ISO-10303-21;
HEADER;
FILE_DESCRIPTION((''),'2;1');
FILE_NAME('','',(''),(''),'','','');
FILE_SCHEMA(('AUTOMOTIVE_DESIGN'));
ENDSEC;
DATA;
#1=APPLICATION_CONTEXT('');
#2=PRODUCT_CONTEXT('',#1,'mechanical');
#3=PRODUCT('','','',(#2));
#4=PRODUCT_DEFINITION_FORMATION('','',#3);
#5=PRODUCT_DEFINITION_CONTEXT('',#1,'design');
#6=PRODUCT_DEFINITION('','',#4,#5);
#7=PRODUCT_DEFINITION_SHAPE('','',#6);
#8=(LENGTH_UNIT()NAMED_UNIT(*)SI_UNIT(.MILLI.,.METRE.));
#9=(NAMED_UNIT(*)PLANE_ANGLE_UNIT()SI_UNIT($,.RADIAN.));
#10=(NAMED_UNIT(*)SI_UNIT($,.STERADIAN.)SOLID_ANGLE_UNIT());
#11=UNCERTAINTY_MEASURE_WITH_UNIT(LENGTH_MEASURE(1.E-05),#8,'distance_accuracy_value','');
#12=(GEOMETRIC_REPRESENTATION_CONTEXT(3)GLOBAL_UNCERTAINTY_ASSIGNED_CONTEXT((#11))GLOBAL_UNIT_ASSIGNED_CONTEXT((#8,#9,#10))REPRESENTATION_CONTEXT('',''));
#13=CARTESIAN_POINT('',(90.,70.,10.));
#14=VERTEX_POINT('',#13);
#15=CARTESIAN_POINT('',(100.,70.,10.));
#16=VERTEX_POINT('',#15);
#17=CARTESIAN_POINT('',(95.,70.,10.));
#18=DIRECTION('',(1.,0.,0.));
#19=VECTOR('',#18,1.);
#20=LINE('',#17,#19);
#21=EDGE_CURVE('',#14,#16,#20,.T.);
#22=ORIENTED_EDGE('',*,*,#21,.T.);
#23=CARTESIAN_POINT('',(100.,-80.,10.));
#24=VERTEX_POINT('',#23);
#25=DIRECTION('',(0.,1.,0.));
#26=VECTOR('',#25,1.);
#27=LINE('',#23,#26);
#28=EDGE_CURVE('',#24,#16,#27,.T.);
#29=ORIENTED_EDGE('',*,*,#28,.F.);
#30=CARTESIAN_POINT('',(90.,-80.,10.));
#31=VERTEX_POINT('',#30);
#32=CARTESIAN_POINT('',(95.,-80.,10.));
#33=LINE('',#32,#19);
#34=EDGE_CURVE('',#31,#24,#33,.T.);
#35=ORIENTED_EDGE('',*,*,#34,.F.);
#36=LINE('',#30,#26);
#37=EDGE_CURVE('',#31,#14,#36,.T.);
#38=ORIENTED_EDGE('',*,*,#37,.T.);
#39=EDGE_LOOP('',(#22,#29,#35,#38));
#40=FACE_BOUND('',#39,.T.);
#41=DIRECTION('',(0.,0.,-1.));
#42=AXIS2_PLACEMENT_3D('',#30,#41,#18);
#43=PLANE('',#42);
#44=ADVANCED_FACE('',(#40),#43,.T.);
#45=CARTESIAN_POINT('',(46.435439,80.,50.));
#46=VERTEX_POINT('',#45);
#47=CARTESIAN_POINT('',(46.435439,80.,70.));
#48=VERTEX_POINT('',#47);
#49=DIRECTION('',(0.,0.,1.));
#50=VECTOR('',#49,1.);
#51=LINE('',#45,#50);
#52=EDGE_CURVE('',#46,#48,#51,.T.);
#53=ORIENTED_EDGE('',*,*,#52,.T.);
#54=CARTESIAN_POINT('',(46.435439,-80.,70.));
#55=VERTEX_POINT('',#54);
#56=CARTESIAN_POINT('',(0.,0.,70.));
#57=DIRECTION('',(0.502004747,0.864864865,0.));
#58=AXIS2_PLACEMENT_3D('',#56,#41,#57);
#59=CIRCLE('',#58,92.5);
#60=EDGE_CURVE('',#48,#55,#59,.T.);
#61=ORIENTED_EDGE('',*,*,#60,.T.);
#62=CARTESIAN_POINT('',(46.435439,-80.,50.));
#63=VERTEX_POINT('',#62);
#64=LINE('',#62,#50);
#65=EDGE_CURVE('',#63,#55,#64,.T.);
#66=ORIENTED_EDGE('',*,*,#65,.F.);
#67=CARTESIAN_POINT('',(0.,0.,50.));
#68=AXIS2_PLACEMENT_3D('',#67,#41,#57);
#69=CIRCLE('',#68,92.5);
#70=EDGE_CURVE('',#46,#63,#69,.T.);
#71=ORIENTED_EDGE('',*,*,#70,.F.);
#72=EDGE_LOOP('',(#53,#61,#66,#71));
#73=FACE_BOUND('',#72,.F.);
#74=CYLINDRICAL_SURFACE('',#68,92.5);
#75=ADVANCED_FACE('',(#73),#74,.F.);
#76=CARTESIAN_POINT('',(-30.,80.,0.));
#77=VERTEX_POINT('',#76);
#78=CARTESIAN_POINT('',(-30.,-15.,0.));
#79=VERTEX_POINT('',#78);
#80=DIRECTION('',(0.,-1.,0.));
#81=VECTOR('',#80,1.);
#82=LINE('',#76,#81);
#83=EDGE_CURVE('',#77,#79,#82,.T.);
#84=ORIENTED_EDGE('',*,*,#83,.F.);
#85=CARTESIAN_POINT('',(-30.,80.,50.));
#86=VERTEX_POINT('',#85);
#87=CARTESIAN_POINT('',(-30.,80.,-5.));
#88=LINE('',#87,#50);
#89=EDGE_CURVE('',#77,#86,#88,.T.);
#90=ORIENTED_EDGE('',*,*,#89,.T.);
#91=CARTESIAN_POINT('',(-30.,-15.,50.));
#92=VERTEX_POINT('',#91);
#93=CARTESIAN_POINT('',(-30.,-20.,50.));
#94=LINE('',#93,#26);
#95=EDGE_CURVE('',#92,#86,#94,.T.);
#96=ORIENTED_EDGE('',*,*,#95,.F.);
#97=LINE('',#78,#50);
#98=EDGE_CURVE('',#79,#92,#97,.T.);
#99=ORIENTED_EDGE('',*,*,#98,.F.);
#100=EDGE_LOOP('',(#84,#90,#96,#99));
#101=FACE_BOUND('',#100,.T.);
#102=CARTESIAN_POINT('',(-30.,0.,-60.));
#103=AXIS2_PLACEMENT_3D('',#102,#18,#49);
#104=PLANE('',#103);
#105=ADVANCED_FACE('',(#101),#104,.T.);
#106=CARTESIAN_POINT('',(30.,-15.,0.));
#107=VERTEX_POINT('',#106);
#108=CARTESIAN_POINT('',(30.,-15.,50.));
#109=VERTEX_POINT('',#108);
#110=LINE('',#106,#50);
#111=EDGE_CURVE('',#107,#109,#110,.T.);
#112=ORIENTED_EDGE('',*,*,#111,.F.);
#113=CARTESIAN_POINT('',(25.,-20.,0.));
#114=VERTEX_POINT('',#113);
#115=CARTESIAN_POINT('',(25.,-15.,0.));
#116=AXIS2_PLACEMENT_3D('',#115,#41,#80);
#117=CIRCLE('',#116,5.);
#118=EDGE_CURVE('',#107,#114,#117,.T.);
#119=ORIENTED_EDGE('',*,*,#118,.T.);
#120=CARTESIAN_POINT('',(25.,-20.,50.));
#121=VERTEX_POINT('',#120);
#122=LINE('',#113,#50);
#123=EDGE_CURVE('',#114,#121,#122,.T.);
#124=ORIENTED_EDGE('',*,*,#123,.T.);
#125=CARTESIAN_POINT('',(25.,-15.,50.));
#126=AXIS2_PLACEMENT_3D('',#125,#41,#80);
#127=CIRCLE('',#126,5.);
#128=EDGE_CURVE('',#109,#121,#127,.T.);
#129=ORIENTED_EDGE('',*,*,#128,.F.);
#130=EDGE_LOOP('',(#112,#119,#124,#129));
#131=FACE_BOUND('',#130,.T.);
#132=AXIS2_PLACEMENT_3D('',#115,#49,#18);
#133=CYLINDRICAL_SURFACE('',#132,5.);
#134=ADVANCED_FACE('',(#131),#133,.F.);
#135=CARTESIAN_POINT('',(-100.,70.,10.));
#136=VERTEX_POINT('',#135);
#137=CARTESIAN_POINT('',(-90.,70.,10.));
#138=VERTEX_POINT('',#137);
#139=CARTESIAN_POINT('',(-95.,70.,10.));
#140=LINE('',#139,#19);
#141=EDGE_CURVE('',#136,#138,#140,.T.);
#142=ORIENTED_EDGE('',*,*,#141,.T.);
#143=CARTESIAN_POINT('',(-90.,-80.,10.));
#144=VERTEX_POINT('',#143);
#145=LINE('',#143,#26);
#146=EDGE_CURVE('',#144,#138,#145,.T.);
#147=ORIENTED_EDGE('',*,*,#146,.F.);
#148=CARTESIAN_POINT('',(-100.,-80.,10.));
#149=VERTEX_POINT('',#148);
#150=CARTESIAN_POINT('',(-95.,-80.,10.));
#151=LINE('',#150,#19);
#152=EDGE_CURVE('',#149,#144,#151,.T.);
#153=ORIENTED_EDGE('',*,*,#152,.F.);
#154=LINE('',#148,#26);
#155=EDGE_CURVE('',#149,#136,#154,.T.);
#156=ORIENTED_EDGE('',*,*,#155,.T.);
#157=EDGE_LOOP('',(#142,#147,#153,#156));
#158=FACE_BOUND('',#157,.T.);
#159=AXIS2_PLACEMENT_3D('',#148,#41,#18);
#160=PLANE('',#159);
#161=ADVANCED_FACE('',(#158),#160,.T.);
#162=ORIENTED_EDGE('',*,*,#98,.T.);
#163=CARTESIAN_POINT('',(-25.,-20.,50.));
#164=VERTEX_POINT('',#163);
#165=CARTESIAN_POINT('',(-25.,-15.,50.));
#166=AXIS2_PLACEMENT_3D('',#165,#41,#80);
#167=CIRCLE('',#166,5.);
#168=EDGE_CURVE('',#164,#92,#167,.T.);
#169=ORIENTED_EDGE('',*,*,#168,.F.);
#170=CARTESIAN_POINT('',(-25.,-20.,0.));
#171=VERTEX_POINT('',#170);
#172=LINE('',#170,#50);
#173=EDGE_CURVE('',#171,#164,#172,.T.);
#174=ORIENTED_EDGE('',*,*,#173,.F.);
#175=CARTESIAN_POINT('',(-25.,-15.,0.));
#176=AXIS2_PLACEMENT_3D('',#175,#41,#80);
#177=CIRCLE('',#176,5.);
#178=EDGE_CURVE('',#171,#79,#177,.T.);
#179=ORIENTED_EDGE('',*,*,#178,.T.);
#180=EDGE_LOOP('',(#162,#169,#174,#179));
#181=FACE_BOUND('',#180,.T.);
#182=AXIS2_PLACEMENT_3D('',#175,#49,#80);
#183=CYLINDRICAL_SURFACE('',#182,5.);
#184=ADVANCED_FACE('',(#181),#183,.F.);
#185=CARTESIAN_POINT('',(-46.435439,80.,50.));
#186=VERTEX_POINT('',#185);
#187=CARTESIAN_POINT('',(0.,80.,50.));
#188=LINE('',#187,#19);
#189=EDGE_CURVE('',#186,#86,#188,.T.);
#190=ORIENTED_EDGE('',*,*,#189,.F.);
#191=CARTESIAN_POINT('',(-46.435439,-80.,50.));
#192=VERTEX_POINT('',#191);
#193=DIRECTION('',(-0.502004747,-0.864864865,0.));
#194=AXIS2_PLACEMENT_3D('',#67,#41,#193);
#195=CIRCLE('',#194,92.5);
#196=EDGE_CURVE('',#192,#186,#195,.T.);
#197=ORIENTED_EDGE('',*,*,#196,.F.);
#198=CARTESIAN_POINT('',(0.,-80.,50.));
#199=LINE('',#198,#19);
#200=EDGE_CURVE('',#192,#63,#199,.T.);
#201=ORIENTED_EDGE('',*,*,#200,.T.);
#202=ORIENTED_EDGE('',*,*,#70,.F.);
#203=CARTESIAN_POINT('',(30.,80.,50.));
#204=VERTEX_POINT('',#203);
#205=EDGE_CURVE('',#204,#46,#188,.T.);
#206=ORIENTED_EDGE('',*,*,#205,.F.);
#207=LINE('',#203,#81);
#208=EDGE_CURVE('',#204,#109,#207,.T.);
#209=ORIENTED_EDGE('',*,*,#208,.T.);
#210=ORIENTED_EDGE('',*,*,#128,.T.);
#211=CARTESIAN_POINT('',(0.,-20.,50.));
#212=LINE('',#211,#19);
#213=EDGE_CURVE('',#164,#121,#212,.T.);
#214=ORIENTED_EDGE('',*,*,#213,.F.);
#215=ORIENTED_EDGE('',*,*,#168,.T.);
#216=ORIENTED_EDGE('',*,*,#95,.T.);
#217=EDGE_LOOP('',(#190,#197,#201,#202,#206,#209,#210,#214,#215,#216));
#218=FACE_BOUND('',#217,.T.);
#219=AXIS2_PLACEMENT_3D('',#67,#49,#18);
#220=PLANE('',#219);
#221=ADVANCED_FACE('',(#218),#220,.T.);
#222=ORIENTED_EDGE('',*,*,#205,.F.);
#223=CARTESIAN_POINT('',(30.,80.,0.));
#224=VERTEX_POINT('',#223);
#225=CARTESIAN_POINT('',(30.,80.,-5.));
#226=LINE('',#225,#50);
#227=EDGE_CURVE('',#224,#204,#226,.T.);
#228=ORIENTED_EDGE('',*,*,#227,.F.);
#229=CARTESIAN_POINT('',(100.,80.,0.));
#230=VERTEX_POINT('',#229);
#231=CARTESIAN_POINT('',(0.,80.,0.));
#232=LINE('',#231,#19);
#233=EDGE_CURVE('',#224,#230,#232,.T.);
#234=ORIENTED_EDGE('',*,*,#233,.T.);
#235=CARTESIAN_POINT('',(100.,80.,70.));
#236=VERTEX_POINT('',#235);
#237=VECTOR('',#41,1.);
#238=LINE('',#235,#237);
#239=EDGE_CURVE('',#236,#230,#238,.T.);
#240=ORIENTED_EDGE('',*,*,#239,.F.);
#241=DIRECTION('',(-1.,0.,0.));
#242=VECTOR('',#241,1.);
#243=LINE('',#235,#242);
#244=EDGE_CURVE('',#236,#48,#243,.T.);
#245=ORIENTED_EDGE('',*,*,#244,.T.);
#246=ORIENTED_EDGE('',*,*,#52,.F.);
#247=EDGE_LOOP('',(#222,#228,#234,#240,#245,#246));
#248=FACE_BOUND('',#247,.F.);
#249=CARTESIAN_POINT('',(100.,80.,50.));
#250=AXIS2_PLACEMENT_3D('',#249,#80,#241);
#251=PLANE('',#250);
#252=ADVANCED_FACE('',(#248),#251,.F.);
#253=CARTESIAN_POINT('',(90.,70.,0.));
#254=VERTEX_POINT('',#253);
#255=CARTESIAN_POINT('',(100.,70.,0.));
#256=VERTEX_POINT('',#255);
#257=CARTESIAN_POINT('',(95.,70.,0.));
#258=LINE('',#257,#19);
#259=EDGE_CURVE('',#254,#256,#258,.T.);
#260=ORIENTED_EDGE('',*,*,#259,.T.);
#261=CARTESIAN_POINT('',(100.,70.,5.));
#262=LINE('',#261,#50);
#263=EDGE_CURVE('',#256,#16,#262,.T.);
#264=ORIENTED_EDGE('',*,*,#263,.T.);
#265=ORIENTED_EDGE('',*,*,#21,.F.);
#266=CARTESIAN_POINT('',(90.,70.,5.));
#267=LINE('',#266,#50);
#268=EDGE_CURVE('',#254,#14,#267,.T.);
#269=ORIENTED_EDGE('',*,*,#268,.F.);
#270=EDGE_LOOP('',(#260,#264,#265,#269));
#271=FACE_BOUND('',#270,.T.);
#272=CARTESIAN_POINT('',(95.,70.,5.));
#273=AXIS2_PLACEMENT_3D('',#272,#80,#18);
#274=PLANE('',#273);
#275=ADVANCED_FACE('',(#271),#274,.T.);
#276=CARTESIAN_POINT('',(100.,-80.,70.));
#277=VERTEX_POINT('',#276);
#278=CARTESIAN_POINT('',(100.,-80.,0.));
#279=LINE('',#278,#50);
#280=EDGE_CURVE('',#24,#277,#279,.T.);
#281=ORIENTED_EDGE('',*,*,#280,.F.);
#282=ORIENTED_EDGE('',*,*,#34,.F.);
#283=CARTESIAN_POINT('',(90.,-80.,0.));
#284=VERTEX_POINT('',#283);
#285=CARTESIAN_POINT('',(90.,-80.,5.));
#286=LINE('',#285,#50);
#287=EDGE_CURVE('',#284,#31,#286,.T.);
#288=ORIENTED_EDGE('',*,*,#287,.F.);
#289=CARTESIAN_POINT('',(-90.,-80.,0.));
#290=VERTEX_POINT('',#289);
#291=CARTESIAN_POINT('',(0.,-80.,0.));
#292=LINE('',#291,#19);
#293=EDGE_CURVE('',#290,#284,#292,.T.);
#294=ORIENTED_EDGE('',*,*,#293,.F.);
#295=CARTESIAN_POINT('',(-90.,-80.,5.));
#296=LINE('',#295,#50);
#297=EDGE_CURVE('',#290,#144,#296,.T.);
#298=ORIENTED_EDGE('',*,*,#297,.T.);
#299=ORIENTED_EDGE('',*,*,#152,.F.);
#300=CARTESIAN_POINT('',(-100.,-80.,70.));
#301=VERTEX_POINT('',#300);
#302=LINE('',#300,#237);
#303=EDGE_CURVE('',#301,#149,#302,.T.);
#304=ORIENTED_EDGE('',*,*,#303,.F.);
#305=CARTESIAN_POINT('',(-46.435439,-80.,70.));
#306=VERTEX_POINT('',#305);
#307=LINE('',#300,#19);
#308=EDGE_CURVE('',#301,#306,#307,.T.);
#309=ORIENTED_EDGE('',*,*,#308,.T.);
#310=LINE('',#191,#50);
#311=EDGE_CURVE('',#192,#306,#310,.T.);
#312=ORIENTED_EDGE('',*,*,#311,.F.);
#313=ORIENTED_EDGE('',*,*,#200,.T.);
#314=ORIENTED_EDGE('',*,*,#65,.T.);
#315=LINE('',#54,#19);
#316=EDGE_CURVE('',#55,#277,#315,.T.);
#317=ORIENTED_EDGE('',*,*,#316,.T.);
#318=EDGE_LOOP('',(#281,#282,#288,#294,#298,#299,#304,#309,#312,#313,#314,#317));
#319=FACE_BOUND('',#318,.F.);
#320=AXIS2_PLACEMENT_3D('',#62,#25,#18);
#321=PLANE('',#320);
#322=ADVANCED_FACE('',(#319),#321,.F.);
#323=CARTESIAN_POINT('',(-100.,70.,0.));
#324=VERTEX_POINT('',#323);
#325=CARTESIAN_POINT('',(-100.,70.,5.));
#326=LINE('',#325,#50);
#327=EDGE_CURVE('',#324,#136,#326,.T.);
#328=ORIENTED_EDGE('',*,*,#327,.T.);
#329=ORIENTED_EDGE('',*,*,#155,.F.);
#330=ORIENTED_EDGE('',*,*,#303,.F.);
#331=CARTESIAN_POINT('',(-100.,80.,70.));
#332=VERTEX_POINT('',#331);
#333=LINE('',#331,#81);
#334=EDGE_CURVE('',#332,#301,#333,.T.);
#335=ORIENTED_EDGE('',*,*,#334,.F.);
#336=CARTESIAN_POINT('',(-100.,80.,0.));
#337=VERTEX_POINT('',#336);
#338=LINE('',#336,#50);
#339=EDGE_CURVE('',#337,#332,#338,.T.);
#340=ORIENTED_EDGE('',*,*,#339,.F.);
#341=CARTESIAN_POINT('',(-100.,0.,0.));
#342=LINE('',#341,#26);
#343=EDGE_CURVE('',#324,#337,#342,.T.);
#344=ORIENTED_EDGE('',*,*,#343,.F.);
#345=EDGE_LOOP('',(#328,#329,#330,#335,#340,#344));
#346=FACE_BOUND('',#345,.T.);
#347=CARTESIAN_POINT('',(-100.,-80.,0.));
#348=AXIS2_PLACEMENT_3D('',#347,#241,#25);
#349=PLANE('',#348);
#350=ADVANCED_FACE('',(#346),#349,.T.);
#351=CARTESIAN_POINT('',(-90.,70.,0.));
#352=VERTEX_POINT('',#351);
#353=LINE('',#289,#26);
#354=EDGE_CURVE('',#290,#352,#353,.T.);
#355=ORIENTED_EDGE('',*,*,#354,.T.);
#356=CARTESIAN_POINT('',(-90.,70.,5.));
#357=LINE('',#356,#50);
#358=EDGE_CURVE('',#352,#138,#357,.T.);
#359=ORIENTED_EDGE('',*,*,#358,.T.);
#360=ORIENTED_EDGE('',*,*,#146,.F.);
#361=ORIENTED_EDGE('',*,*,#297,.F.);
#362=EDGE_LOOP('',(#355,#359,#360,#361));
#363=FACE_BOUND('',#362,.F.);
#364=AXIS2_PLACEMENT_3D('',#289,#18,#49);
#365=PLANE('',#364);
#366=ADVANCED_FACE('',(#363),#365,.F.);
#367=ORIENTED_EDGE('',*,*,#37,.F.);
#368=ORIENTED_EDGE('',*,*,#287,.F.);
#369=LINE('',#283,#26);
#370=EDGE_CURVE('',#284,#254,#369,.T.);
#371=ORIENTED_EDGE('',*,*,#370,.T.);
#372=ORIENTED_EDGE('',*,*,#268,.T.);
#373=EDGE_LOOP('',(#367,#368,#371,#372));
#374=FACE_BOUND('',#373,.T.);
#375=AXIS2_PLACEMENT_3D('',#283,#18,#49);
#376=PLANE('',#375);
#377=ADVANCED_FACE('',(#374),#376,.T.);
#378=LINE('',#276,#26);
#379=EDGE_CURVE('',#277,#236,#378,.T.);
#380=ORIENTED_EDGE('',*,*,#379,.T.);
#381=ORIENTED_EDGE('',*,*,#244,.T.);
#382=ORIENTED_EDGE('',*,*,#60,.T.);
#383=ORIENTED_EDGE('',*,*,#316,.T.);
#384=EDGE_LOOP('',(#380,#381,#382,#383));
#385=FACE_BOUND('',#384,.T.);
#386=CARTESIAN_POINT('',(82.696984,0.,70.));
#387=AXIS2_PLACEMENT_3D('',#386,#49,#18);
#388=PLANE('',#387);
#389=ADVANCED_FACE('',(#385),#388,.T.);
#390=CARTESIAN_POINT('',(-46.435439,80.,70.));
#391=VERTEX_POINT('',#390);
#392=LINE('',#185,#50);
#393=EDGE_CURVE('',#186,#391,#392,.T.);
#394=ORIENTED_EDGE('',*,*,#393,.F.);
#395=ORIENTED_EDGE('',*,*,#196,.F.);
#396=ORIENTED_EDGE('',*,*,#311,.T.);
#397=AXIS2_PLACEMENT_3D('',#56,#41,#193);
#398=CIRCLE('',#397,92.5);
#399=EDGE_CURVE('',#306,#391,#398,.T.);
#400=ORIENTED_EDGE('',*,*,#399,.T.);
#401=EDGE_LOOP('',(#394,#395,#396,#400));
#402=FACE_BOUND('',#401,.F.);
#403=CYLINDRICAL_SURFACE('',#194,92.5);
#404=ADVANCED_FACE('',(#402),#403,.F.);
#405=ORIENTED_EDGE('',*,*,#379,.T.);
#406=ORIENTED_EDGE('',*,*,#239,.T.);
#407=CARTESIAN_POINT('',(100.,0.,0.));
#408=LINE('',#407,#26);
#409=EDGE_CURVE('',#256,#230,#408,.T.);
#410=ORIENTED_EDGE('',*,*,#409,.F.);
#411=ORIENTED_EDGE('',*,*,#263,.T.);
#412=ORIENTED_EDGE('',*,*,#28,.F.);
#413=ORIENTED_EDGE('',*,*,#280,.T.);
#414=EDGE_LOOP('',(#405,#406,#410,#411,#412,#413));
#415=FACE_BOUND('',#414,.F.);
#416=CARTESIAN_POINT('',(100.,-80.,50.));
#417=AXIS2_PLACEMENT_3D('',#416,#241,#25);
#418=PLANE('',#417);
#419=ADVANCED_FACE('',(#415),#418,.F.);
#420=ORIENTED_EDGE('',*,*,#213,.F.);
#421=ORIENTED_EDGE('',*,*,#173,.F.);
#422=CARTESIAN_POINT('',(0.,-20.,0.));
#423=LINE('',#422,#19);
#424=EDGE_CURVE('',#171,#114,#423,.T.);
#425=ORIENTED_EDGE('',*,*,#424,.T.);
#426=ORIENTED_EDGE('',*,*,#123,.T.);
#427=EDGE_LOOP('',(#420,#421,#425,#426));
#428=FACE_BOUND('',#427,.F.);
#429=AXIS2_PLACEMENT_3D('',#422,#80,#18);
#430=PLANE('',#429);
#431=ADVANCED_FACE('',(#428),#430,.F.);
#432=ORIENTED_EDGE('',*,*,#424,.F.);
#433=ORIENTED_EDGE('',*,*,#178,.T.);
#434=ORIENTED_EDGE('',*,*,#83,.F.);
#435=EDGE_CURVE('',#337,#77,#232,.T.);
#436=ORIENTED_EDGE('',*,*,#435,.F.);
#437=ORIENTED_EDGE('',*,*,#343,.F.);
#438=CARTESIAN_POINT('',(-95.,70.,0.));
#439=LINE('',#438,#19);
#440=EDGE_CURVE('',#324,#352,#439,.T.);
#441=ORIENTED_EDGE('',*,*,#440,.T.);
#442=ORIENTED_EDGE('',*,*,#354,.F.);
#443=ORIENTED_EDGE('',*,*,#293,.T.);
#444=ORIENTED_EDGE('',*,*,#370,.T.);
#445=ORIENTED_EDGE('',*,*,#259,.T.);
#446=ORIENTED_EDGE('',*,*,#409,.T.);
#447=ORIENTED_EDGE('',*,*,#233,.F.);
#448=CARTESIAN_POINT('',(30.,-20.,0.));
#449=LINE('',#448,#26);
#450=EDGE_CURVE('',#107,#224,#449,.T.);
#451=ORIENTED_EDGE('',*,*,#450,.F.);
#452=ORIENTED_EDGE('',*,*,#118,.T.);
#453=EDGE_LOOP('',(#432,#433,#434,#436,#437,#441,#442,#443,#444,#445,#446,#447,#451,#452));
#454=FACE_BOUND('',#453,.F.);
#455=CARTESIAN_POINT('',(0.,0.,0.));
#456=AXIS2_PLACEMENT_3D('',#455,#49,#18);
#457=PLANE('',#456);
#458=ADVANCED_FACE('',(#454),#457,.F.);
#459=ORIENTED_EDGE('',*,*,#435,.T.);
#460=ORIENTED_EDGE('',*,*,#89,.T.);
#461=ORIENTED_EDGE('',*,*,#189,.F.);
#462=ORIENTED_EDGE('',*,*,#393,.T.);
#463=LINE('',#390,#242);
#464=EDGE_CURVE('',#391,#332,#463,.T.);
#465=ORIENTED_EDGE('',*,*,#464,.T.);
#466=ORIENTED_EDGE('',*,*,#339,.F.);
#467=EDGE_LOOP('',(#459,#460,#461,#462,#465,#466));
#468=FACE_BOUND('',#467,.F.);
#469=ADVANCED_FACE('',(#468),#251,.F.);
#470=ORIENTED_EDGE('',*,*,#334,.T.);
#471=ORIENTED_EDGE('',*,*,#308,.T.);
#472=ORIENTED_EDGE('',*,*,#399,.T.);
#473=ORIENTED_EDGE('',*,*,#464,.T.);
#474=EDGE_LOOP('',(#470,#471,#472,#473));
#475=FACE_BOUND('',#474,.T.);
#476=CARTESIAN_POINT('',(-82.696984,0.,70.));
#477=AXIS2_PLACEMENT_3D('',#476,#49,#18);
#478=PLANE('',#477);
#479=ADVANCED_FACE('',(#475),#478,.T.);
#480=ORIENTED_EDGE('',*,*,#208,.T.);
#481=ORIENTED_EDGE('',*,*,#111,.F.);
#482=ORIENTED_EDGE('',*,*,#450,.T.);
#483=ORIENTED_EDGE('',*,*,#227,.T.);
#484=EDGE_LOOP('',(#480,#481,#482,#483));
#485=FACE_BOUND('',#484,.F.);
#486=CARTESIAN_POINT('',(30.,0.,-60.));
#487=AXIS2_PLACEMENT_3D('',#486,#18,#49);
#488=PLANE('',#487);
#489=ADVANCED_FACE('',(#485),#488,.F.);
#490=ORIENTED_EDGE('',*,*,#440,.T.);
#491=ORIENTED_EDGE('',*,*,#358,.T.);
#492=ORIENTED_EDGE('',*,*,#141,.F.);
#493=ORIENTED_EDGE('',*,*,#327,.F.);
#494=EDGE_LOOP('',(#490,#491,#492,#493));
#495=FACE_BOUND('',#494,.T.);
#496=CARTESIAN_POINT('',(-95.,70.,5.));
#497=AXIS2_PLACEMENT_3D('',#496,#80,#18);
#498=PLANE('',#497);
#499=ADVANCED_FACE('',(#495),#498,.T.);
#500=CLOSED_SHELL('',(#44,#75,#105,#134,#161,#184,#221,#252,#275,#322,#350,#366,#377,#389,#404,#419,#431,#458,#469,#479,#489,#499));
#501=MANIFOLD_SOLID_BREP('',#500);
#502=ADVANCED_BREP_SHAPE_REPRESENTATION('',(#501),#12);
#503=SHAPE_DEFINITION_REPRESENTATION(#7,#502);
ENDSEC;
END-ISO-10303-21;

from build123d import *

# Parameters (mm, degrees)
F0_W          = 200
F0_H          = 160
F1_DEPTH      = 50
F3_DEPTH      = 20
F5_W          = 60
F5_H          = 120
F6_DEPTH      = 90
F6_DEPTH_BACK = 20
F9_W          = 10
F9_H          = 10
F10_DEPTH     = 150
F11_R         = 5


with BuildPart() as f1:
    # F0 (on Top) → F1 (new body)
    with BuildSketch(Plane.XY):
        Rectangle(F0_W, F0_H)
    extrude(amount=F1_DEPTH)

    # F2 (on face) → F3 (join)
    with BuildSketch(Plane.XY.offset(50)):
        with BuildLine():
            ThreePointArc((46.4354390525, 80), (80.1608636192, 46.1571873474), (92.5, 0))
            ThreePointArc((92.5, 0), (80.1608636192, -46.1571873474), (46.4354390525, -80))
            Line((46.4354390525, -80), (100, -80))
            Line((100, -80), (100, 80))
            Line((100, 80), (46.4354390525, 80))
        make_face()
        with BuildLine():
            ThreePointArc((-46.4354390525, -80), (-92.5, 0), (-46.4354390525, 80))
            Line((-46.4354390525, 80), (-100, 80))
            Line((-100, 80), (-100, -80))
            Line((-100, -80), (-46.4354390525, -80))
        make_face()
    extrude(amount=F3_DEPTH)

    # F5 (on Front) → F6 (cut, two sides)
    with BuildSketch(Plane.XZ) as f6_sk:
        Rectangle(F5_W, F5_H)
    extrude(amount=-F6_DEPTH, mode=Mode.SUBTRACT)
    extrude(f6_sk.sketch, amount=F6_DEPTH_BACK, mode=Mode.SUBTRACT)

    # F9 (on face) → F10 (cut)
    with BuildSketch(Plane.XZ.offset(80)):
        with Locations((95, 5)):
            Rectangle(F9_W, F9_H)
        with Locations((-95, 5)):
            Rectangle(F9_W, F9_H)
    extrude(amount=-F10_DEPTH, mode=Mode.SUBTRACT)

    # F11
    f11_edges = [f1.edges().sort_by_distance(p)[0] for p in [
        (-30, -20, 25),
        (30, -20, 25),
    ]]
    fillet(f11_edges, radius=F11_R)


solid = f1.part
